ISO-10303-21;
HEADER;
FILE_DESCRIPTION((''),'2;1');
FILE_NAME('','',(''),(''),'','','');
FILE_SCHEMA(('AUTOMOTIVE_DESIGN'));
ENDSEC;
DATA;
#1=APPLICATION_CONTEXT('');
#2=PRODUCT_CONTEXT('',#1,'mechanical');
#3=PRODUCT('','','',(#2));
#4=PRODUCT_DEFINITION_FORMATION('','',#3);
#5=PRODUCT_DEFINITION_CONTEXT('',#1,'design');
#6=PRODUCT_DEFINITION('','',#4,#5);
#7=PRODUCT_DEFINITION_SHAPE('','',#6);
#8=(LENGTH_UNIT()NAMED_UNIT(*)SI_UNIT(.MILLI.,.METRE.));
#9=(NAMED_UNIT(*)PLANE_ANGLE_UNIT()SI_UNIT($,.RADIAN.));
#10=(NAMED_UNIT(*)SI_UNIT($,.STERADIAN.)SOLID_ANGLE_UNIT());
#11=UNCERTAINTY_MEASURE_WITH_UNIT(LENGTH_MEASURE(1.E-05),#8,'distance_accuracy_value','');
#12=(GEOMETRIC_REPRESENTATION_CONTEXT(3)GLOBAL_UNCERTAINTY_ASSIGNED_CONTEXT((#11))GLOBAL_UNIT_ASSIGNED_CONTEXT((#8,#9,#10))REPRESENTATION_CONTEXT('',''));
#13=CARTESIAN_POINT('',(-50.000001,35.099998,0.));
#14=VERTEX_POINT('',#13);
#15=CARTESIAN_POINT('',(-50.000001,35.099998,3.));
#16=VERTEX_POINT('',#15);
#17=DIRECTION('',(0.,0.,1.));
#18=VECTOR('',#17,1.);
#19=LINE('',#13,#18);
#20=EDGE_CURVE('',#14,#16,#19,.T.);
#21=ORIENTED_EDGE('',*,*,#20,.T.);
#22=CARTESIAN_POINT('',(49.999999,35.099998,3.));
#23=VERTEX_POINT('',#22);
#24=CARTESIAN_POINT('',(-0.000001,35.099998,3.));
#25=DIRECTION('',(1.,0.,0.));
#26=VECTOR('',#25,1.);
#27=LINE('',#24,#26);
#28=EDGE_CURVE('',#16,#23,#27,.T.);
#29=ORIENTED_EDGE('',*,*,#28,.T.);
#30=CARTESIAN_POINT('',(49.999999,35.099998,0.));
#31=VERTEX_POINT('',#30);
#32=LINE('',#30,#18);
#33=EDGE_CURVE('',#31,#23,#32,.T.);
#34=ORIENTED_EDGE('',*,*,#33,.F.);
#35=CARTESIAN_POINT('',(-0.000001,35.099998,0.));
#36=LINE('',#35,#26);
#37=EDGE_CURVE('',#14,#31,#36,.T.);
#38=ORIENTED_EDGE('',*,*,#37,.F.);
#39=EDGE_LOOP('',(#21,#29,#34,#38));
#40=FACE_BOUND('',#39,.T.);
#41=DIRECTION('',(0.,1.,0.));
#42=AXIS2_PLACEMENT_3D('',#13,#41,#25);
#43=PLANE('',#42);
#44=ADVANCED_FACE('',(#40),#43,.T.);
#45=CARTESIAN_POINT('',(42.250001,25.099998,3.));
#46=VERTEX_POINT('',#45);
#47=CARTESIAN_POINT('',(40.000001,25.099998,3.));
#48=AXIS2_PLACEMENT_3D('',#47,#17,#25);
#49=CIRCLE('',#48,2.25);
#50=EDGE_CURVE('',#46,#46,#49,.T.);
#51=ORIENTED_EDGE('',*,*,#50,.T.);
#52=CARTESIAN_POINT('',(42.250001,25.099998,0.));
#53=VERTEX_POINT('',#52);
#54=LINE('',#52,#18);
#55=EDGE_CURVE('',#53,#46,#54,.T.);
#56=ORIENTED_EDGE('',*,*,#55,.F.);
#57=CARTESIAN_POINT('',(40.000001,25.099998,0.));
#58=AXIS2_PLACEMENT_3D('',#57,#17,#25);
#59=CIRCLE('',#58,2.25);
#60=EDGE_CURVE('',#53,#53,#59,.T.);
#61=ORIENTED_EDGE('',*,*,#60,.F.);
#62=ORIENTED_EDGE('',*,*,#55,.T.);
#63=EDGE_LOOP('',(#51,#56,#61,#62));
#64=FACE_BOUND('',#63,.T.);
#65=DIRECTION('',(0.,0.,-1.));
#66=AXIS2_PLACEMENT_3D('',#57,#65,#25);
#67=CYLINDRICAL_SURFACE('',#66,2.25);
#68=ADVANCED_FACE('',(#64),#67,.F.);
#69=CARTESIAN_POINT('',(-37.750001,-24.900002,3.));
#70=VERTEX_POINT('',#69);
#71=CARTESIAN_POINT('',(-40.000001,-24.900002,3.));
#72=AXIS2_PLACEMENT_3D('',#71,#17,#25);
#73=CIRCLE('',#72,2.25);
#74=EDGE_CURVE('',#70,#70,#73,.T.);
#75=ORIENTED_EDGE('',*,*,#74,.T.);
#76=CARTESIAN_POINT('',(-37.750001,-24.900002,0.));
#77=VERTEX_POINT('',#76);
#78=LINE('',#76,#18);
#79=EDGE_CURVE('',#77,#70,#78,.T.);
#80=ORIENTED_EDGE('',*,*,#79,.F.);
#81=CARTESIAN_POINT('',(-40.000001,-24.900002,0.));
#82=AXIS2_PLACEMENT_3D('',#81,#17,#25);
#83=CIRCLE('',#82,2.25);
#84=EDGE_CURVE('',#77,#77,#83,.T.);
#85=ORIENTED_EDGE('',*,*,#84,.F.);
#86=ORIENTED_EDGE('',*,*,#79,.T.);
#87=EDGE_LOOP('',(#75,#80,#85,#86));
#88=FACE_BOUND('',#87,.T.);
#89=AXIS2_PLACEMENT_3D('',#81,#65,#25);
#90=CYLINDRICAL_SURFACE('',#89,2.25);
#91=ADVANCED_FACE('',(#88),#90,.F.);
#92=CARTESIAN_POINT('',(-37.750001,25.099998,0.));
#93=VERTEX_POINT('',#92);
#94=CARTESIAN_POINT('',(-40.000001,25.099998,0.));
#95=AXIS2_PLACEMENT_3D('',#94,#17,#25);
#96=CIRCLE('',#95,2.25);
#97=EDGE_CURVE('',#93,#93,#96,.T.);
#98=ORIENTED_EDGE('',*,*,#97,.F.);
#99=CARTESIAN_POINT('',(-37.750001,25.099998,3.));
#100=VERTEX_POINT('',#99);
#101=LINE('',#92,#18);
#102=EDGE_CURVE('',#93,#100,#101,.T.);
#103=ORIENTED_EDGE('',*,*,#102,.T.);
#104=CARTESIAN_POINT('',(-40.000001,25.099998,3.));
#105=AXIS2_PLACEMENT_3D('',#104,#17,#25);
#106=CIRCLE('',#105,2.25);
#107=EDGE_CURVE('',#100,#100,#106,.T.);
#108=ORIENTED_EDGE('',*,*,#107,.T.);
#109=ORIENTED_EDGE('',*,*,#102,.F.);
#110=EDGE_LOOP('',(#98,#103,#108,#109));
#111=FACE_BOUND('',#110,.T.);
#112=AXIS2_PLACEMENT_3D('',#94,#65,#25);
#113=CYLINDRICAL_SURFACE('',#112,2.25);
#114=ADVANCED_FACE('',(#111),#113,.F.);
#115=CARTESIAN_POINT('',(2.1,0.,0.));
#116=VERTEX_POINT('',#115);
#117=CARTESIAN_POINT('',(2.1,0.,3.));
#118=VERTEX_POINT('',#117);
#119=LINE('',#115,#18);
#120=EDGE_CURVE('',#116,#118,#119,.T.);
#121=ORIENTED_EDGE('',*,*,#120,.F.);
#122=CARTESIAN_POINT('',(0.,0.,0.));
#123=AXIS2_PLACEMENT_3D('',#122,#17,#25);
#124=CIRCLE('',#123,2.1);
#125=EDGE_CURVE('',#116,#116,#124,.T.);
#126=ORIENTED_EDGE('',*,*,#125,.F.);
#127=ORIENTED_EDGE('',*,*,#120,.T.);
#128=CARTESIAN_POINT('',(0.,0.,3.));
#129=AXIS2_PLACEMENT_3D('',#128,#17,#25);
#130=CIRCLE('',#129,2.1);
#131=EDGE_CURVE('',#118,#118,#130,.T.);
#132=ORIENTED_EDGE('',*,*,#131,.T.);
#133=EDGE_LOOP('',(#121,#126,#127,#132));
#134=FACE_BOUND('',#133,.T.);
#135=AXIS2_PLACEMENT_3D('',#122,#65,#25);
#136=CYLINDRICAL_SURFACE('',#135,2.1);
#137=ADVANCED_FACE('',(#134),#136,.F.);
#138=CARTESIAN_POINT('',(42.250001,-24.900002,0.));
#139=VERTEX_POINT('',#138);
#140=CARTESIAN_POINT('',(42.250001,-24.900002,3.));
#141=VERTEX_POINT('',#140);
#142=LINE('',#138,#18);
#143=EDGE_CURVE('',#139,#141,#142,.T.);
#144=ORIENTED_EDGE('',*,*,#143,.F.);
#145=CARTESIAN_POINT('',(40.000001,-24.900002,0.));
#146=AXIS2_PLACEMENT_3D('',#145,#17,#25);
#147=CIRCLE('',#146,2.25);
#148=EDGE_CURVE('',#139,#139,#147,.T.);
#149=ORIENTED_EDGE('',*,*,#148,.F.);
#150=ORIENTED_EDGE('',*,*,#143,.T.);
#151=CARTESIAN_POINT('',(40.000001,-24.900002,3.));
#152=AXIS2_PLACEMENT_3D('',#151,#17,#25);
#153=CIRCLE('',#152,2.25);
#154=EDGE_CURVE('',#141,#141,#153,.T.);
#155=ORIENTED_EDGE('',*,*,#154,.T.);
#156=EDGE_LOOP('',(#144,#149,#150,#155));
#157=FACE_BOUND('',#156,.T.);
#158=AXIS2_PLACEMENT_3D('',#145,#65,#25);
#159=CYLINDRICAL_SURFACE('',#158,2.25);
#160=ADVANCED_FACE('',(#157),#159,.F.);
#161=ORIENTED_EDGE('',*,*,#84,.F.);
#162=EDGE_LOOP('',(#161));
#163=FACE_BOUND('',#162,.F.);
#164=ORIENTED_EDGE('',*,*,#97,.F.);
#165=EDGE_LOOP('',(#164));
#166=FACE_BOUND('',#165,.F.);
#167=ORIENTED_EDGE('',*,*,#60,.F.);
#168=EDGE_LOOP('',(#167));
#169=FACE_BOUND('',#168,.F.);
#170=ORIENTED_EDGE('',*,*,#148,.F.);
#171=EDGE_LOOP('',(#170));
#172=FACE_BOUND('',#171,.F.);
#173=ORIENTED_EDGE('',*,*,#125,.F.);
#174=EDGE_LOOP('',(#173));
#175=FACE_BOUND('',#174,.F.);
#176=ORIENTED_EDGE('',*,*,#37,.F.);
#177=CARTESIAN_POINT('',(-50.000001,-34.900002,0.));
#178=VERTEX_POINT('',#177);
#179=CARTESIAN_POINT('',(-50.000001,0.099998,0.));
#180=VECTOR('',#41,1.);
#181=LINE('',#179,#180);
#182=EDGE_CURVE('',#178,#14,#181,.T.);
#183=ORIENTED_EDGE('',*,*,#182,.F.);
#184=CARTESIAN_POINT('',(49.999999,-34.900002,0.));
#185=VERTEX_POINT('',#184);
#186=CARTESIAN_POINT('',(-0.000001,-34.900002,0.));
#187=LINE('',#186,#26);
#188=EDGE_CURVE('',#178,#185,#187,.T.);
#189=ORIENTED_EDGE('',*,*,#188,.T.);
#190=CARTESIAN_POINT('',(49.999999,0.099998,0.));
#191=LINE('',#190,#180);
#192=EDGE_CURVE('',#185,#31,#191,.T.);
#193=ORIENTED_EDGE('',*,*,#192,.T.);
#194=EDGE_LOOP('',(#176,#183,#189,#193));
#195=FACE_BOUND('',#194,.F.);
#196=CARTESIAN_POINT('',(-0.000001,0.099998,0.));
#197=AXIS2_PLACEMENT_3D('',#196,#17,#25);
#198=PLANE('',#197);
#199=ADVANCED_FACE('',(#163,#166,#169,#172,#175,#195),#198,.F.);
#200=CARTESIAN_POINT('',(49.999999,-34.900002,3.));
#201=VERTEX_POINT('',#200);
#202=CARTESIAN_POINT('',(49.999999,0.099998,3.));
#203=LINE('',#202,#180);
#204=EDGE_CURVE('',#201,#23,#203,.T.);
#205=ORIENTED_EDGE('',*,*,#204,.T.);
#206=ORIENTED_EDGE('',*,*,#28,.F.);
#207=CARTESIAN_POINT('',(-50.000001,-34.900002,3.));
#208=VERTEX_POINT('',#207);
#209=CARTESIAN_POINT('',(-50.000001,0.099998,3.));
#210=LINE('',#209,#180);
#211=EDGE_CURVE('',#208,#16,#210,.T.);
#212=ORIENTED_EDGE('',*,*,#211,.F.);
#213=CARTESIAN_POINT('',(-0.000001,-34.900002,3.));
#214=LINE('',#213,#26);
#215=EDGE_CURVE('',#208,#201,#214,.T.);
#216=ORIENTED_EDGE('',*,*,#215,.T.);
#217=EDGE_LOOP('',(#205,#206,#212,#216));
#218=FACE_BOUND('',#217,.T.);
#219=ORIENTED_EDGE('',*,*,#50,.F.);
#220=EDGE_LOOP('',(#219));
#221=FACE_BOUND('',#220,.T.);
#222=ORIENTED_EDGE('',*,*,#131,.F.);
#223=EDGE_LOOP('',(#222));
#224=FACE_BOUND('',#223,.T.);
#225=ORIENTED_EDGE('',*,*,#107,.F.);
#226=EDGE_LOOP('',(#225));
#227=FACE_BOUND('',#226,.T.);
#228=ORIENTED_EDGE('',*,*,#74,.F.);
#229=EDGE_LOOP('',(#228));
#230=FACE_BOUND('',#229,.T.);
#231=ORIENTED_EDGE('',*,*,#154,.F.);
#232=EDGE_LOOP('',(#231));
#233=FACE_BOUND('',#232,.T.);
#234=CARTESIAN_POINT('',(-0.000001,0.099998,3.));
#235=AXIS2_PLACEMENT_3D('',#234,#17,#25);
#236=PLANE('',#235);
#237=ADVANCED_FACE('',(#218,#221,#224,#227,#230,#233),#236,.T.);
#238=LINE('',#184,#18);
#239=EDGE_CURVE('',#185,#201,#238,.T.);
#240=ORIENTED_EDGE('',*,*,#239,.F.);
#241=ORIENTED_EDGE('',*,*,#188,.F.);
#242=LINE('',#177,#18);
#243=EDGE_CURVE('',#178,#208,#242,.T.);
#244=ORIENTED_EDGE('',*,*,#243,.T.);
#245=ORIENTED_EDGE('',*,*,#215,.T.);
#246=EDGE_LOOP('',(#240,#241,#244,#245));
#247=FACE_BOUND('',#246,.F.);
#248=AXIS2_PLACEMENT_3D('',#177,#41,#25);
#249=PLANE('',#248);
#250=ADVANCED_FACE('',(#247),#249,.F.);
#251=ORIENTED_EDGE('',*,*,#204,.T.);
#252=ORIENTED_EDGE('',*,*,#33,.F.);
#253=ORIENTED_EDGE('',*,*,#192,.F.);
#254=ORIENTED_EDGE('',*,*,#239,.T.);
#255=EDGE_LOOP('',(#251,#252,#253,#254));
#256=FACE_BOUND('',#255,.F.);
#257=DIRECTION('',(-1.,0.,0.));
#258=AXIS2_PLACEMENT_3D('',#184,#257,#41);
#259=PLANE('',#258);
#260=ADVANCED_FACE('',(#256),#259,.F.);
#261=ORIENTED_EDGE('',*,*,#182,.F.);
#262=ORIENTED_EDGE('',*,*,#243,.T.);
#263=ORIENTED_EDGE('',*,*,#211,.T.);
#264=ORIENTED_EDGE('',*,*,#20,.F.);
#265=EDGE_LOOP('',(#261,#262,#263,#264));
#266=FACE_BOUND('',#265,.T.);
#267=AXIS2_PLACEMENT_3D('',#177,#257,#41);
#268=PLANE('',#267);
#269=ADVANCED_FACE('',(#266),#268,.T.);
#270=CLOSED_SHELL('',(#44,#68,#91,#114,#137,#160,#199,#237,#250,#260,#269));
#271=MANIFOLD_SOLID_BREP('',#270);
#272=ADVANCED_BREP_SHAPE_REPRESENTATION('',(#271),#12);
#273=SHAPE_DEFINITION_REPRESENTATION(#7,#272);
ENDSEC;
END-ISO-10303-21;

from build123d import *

# Parameters (mm, degrees)
F0_W     = 100
F0_H     = 70
F0_R     = 2.25
F0_R_2   = 2.1
F1_DEPTH = 3


# Not quite as in the source:
# - a feature names something its author has since deleted; it is built from what else it names


with BuildPart() as f1:
    # F0 (on Top) → F1 (new body)
    with BuildSketch(Plane.XY):
        with Locations((-7.451e-07, 0.0999978185)):
            Rectangle(F0_W, F0_H)
        with Locations((-40.0000007451, -24.9000021815)):
            Circle(F0_R, mode=Mode.SUBTRACT)
        with Locations((40.0000007451, -24.9000021815)):
            Circle(F0_R, mode=Mode.SUBTRACT)
        Circle(F0_R_2, mode=Mode.SUBTRACT)
        with Locations((-40.0000007451, 25.0999978185)):
            Circle(F0_R, mode=Mode.SUBTRACT)
        with Locations((40.0000007451, 25.0999978185)):
            Circle(F0_R, mode=Mode.SUBTRACT)
    extrude(amount=F1_DEPTH)


solid = f1.part
